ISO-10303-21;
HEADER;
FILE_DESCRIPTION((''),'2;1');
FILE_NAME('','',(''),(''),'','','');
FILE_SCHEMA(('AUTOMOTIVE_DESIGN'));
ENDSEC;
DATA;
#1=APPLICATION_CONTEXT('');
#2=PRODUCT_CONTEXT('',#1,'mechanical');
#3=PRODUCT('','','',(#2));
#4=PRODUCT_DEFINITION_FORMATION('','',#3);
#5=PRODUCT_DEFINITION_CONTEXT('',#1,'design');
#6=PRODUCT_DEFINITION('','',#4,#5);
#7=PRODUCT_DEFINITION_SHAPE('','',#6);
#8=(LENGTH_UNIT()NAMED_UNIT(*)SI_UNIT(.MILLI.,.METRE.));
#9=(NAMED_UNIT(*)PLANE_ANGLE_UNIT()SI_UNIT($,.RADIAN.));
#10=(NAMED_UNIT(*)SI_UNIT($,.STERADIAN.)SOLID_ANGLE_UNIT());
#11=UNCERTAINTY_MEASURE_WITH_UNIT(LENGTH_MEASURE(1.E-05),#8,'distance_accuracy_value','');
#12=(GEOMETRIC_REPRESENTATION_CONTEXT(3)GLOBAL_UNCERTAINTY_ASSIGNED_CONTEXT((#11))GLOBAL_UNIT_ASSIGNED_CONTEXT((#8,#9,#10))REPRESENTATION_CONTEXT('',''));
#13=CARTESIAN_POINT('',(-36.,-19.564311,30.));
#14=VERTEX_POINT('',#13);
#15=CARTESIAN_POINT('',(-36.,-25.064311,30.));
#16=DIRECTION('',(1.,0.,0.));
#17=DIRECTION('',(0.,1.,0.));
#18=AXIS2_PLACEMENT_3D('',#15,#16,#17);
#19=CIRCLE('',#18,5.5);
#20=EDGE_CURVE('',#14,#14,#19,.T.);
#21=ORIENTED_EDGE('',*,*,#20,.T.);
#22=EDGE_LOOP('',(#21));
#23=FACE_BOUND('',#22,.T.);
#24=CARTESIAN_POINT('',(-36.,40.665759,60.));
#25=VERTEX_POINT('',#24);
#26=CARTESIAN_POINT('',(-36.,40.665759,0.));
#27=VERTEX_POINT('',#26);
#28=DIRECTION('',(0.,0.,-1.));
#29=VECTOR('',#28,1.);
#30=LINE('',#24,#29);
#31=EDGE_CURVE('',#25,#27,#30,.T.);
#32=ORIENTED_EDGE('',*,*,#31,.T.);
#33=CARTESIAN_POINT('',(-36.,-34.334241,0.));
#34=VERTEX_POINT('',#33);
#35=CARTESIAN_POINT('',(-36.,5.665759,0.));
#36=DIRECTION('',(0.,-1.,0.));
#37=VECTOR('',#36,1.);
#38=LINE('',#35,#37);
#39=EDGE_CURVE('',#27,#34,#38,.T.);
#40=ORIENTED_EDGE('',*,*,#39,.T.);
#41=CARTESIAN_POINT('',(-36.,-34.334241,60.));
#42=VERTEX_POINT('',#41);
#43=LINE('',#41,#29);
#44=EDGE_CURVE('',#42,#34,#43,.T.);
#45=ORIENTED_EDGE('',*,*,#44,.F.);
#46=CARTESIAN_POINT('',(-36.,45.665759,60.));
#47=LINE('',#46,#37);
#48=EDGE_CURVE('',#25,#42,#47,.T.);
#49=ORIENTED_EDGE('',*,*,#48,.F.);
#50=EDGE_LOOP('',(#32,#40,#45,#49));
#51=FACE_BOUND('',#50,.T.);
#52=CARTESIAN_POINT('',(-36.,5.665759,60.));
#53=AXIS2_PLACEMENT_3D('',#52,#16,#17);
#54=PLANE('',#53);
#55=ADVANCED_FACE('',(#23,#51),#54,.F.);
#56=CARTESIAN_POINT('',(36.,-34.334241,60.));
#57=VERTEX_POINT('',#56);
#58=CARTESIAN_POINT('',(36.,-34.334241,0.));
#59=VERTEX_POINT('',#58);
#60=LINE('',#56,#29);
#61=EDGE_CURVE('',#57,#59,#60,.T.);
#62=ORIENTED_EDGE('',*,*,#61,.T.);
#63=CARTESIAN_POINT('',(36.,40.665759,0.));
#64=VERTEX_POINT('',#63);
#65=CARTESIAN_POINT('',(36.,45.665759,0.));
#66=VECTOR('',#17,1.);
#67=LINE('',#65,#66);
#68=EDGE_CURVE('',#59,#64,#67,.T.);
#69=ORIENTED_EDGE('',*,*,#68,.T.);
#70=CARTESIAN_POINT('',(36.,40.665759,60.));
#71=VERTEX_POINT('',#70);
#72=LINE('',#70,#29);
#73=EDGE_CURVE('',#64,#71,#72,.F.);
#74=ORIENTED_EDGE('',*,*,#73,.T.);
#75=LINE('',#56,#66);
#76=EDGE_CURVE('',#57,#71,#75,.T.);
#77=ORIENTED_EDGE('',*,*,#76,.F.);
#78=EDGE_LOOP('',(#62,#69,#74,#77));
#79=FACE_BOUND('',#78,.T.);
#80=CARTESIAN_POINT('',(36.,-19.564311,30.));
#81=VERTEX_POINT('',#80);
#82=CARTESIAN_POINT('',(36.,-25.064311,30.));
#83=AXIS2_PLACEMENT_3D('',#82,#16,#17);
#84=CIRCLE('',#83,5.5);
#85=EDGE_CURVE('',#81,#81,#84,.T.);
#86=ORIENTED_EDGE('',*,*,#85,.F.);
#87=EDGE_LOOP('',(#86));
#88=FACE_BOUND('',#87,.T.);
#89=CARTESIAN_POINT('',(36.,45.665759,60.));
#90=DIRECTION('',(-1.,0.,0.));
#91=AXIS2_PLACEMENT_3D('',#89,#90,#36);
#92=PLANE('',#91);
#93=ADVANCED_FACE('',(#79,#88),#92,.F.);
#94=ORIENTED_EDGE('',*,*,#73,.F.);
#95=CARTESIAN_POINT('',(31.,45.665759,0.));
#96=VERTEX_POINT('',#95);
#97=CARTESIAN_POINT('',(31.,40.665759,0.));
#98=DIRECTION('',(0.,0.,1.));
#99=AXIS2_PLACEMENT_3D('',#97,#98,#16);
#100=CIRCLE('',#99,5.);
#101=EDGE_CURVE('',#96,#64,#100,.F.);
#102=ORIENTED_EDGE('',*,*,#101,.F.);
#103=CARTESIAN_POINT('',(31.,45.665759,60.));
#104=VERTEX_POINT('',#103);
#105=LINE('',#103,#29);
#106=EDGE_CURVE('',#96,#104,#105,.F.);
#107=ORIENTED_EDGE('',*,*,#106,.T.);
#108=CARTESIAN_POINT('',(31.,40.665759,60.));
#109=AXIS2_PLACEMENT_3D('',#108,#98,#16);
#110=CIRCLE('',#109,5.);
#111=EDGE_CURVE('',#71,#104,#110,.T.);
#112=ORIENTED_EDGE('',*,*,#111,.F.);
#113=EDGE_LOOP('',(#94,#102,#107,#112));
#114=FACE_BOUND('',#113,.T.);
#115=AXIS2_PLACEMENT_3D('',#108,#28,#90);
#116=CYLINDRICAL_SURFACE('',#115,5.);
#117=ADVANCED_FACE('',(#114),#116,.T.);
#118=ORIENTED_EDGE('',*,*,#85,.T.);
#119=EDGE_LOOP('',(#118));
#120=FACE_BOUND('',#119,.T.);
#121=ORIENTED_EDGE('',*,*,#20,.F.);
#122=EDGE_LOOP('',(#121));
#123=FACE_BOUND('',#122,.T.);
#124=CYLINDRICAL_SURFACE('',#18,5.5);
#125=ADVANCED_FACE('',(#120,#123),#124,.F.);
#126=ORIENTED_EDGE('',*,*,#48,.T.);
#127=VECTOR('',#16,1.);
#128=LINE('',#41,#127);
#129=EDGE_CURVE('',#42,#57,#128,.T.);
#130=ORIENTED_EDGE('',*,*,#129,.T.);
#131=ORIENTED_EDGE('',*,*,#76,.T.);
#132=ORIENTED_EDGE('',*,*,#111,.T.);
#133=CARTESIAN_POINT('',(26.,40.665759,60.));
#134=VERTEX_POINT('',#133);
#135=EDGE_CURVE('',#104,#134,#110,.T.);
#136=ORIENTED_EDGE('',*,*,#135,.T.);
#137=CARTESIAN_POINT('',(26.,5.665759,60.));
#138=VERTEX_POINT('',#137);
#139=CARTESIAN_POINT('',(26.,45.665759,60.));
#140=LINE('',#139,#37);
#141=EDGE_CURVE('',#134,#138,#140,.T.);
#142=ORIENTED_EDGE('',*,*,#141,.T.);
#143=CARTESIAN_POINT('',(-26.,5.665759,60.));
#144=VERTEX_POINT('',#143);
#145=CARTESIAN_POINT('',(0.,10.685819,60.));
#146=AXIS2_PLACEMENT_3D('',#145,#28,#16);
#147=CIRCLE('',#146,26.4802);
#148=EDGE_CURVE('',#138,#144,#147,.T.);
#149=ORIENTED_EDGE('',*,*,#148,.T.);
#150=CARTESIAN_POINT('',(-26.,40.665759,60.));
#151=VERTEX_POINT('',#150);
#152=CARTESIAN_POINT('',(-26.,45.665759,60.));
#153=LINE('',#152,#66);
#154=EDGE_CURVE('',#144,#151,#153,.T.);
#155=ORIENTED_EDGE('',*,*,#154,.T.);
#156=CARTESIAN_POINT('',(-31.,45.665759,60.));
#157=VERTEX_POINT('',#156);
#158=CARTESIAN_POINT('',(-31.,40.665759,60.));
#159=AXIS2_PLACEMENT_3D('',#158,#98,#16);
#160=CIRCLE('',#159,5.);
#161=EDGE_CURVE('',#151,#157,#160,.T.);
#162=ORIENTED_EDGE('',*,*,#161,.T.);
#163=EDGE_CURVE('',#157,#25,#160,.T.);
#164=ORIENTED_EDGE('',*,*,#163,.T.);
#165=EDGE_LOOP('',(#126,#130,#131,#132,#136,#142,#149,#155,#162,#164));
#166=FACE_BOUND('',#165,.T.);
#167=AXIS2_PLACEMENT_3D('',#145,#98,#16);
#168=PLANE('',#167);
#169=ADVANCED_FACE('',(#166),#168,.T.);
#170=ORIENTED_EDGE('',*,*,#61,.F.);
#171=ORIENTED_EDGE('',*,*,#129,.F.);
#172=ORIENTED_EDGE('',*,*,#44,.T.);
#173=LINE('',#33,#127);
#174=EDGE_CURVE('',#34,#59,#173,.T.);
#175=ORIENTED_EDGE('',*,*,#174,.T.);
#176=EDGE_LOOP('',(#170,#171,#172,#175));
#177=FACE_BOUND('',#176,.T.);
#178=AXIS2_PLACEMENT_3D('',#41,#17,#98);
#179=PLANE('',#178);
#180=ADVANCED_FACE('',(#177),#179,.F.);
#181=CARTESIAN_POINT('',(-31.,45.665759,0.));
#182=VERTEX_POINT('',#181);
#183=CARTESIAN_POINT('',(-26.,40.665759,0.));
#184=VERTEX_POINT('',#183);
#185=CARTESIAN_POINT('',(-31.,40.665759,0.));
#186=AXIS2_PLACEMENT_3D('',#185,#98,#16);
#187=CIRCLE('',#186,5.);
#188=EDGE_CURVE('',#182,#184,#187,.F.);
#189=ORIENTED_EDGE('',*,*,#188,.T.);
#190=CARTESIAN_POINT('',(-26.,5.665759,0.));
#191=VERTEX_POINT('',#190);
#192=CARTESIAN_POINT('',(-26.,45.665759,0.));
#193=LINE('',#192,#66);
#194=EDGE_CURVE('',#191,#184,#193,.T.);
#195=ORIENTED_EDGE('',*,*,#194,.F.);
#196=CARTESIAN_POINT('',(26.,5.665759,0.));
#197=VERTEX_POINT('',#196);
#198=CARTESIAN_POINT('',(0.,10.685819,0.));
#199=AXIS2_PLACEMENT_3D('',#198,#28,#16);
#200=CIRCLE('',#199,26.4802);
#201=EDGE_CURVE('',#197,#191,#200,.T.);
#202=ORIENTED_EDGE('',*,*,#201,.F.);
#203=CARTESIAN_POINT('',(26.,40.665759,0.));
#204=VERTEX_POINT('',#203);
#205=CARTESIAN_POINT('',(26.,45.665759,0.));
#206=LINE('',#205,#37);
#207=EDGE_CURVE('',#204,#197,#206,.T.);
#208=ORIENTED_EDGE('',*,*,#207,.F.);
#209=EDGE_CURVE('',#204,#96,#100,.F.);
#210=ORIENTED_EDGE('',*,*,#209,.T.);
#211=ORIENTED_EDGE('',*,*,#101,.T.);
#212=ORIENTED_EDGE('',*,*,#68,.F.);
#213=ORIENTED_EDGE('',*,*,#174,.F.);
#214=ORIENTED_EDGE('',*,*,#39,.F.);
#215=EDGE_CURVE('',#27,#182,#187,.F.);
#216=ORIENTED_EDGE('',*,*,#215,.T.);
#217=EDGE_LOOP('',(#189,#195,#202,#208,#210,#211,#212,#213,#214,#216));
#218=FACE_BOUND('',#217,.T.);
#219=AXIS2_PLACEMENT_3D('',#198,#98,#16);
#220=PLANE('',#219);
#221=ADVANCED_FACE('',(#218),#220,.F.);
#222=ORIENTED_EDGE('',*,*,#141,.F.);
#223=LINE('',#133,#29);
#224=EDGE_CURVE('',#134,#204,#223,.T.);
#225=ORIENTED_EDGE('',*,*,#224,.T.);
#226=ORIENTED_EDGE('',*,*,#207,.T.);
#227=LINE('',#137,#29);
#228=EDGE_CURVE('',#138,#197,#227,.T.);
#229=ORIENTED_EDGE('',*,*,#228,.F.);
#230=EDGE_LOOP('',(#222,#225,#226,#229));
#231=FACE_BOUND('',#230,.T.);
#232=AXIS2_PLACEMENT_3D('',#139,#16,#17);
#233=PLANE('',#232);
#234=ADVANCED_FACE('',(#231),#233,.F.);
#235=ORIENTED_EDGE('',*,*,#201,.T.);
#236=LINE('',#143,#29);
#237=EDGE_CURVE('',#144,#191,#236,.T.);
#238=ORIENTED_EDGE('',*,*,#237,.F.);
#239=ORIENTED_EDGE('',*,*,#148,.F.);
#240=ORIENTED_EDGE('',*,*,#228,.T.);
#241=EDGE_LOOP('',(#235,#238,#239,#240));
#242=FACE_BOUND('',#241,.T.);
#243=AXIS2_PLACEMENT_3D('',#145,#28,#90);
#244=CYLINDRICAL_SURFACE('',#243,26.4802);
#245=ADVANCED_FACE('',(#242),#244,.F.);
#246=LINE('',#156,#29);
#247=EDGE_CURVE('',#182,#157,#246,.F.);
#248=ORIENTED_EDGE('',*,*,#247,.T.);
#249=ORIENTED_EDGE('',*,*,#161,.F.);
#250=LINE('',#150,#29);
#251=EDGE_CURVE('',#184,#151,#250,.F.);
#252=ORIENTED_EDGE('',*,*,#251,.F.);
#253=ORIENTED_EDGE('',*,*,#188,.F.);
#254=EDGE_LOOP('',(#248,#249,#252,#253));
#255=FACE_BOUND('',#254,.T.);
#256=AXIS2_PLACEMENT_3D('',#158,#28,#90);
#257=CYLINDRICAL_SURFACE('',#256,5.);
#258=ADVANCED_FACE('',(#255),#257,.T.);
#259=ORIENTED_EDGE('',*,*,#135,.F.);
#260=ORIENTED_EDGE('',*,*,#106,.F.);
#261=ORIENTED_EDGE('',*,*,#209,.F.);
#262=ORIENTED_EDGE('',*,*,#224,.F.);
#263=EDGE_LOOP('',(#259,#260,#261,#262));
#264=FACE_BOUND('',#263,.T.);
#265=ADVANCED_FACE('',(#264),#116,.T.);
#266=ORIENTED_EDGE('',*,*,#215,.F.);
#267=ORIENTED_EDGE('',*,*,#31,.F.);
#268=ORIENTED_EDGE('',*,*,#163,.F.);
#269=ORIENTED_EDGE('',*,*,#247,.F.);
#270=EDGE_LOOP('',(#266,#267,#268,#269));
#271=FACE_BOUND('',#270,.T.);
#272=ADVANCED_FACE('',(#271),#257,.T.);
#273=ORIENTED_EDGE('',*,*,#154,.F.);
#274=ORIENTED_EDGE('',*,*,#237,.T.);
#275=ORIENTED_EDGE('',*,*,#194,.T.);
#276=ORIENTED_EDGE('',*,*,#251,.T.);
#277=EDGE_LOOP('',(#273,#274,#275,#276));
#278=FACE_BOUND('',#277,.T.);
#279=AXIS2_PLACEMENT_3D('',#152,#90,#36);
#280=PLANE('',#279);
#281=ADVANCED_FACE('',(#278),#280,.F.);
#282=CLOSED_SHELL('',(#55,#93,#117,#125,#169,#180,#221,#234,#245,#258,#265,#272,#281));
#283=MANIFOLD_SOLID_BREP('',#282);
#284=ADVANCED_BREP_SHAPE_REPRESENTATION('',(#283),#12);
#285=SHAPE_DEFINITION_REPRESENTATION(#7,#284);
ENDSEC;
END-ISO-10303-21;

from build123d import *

# Parameters (mm, degrees)
BOSS_EXTRUDE1_DEPTH = 60
FILLET2_R           = 5
SKETCH5_R           = 5.5
CUT_EXTRUDE1_DEPTH  = 105.256230261


with BuildPart() as part:
    # Sketch2 → Boss-Extrude1 (new body)
    with BuildSketch(Plane.XY):
        with BuildLine():
            Line((-26, 45.665759035), (-26, 5.665759035))
            ThreePointArc((-26, 5.665759035), (0, -15.794380862), (26, 5.665759035))
            Line((26, 5.665759035), (26, 45.665759035))
            Line((26, 45.665759035), (36, 45.665759035))
            Line((36, 45.665759035), (36, 2.642754473))
            Line((36, 2.642754473), (36, -34.334240965))
            Line((36, -34.334240965), (-36, -34.334240965))
            Line((-36, -34.334240965), (-36, 5.665759035))
            Line((-36, 5.665759035), (-36, 45.665759035))
            Line((-36, 45.665759035), (-26, 45.665759035))
        make_face()
    extrude(amount=BOSS_EXTRUDE1_DEPTH)

    # Fillet2
    fillet2_edges = [part.edges().sort_by_distance(p)[0] for p in [
        (36, 45.665759035, 30),
        (26, 45.665759035, 30),
        (-26, 45.665759035, 30),
        (-36, 45.665759035, 30),
    ]]
    fillet(fillet2_edges, radius=FILLET2_R - 0.0001)  # a hair under: the kernel refuses the full size

    # Sketch5 → Cut-Extrude1 (cut, through all)
    with BuildSketch(Plane(origin=(36, 0, 0), x_dir=(0, 0, -1), z_dir=(1, 0, 0))):
        with Locations(Location((-30, -25.064310913, 0), (0, 0, 90))):
            Circle(SKETCH5_R)
    extrude(amount=-CUT_EXTRUDE1_DEPTH, mode=Mode.SUBTRACT)


solid = part.part
